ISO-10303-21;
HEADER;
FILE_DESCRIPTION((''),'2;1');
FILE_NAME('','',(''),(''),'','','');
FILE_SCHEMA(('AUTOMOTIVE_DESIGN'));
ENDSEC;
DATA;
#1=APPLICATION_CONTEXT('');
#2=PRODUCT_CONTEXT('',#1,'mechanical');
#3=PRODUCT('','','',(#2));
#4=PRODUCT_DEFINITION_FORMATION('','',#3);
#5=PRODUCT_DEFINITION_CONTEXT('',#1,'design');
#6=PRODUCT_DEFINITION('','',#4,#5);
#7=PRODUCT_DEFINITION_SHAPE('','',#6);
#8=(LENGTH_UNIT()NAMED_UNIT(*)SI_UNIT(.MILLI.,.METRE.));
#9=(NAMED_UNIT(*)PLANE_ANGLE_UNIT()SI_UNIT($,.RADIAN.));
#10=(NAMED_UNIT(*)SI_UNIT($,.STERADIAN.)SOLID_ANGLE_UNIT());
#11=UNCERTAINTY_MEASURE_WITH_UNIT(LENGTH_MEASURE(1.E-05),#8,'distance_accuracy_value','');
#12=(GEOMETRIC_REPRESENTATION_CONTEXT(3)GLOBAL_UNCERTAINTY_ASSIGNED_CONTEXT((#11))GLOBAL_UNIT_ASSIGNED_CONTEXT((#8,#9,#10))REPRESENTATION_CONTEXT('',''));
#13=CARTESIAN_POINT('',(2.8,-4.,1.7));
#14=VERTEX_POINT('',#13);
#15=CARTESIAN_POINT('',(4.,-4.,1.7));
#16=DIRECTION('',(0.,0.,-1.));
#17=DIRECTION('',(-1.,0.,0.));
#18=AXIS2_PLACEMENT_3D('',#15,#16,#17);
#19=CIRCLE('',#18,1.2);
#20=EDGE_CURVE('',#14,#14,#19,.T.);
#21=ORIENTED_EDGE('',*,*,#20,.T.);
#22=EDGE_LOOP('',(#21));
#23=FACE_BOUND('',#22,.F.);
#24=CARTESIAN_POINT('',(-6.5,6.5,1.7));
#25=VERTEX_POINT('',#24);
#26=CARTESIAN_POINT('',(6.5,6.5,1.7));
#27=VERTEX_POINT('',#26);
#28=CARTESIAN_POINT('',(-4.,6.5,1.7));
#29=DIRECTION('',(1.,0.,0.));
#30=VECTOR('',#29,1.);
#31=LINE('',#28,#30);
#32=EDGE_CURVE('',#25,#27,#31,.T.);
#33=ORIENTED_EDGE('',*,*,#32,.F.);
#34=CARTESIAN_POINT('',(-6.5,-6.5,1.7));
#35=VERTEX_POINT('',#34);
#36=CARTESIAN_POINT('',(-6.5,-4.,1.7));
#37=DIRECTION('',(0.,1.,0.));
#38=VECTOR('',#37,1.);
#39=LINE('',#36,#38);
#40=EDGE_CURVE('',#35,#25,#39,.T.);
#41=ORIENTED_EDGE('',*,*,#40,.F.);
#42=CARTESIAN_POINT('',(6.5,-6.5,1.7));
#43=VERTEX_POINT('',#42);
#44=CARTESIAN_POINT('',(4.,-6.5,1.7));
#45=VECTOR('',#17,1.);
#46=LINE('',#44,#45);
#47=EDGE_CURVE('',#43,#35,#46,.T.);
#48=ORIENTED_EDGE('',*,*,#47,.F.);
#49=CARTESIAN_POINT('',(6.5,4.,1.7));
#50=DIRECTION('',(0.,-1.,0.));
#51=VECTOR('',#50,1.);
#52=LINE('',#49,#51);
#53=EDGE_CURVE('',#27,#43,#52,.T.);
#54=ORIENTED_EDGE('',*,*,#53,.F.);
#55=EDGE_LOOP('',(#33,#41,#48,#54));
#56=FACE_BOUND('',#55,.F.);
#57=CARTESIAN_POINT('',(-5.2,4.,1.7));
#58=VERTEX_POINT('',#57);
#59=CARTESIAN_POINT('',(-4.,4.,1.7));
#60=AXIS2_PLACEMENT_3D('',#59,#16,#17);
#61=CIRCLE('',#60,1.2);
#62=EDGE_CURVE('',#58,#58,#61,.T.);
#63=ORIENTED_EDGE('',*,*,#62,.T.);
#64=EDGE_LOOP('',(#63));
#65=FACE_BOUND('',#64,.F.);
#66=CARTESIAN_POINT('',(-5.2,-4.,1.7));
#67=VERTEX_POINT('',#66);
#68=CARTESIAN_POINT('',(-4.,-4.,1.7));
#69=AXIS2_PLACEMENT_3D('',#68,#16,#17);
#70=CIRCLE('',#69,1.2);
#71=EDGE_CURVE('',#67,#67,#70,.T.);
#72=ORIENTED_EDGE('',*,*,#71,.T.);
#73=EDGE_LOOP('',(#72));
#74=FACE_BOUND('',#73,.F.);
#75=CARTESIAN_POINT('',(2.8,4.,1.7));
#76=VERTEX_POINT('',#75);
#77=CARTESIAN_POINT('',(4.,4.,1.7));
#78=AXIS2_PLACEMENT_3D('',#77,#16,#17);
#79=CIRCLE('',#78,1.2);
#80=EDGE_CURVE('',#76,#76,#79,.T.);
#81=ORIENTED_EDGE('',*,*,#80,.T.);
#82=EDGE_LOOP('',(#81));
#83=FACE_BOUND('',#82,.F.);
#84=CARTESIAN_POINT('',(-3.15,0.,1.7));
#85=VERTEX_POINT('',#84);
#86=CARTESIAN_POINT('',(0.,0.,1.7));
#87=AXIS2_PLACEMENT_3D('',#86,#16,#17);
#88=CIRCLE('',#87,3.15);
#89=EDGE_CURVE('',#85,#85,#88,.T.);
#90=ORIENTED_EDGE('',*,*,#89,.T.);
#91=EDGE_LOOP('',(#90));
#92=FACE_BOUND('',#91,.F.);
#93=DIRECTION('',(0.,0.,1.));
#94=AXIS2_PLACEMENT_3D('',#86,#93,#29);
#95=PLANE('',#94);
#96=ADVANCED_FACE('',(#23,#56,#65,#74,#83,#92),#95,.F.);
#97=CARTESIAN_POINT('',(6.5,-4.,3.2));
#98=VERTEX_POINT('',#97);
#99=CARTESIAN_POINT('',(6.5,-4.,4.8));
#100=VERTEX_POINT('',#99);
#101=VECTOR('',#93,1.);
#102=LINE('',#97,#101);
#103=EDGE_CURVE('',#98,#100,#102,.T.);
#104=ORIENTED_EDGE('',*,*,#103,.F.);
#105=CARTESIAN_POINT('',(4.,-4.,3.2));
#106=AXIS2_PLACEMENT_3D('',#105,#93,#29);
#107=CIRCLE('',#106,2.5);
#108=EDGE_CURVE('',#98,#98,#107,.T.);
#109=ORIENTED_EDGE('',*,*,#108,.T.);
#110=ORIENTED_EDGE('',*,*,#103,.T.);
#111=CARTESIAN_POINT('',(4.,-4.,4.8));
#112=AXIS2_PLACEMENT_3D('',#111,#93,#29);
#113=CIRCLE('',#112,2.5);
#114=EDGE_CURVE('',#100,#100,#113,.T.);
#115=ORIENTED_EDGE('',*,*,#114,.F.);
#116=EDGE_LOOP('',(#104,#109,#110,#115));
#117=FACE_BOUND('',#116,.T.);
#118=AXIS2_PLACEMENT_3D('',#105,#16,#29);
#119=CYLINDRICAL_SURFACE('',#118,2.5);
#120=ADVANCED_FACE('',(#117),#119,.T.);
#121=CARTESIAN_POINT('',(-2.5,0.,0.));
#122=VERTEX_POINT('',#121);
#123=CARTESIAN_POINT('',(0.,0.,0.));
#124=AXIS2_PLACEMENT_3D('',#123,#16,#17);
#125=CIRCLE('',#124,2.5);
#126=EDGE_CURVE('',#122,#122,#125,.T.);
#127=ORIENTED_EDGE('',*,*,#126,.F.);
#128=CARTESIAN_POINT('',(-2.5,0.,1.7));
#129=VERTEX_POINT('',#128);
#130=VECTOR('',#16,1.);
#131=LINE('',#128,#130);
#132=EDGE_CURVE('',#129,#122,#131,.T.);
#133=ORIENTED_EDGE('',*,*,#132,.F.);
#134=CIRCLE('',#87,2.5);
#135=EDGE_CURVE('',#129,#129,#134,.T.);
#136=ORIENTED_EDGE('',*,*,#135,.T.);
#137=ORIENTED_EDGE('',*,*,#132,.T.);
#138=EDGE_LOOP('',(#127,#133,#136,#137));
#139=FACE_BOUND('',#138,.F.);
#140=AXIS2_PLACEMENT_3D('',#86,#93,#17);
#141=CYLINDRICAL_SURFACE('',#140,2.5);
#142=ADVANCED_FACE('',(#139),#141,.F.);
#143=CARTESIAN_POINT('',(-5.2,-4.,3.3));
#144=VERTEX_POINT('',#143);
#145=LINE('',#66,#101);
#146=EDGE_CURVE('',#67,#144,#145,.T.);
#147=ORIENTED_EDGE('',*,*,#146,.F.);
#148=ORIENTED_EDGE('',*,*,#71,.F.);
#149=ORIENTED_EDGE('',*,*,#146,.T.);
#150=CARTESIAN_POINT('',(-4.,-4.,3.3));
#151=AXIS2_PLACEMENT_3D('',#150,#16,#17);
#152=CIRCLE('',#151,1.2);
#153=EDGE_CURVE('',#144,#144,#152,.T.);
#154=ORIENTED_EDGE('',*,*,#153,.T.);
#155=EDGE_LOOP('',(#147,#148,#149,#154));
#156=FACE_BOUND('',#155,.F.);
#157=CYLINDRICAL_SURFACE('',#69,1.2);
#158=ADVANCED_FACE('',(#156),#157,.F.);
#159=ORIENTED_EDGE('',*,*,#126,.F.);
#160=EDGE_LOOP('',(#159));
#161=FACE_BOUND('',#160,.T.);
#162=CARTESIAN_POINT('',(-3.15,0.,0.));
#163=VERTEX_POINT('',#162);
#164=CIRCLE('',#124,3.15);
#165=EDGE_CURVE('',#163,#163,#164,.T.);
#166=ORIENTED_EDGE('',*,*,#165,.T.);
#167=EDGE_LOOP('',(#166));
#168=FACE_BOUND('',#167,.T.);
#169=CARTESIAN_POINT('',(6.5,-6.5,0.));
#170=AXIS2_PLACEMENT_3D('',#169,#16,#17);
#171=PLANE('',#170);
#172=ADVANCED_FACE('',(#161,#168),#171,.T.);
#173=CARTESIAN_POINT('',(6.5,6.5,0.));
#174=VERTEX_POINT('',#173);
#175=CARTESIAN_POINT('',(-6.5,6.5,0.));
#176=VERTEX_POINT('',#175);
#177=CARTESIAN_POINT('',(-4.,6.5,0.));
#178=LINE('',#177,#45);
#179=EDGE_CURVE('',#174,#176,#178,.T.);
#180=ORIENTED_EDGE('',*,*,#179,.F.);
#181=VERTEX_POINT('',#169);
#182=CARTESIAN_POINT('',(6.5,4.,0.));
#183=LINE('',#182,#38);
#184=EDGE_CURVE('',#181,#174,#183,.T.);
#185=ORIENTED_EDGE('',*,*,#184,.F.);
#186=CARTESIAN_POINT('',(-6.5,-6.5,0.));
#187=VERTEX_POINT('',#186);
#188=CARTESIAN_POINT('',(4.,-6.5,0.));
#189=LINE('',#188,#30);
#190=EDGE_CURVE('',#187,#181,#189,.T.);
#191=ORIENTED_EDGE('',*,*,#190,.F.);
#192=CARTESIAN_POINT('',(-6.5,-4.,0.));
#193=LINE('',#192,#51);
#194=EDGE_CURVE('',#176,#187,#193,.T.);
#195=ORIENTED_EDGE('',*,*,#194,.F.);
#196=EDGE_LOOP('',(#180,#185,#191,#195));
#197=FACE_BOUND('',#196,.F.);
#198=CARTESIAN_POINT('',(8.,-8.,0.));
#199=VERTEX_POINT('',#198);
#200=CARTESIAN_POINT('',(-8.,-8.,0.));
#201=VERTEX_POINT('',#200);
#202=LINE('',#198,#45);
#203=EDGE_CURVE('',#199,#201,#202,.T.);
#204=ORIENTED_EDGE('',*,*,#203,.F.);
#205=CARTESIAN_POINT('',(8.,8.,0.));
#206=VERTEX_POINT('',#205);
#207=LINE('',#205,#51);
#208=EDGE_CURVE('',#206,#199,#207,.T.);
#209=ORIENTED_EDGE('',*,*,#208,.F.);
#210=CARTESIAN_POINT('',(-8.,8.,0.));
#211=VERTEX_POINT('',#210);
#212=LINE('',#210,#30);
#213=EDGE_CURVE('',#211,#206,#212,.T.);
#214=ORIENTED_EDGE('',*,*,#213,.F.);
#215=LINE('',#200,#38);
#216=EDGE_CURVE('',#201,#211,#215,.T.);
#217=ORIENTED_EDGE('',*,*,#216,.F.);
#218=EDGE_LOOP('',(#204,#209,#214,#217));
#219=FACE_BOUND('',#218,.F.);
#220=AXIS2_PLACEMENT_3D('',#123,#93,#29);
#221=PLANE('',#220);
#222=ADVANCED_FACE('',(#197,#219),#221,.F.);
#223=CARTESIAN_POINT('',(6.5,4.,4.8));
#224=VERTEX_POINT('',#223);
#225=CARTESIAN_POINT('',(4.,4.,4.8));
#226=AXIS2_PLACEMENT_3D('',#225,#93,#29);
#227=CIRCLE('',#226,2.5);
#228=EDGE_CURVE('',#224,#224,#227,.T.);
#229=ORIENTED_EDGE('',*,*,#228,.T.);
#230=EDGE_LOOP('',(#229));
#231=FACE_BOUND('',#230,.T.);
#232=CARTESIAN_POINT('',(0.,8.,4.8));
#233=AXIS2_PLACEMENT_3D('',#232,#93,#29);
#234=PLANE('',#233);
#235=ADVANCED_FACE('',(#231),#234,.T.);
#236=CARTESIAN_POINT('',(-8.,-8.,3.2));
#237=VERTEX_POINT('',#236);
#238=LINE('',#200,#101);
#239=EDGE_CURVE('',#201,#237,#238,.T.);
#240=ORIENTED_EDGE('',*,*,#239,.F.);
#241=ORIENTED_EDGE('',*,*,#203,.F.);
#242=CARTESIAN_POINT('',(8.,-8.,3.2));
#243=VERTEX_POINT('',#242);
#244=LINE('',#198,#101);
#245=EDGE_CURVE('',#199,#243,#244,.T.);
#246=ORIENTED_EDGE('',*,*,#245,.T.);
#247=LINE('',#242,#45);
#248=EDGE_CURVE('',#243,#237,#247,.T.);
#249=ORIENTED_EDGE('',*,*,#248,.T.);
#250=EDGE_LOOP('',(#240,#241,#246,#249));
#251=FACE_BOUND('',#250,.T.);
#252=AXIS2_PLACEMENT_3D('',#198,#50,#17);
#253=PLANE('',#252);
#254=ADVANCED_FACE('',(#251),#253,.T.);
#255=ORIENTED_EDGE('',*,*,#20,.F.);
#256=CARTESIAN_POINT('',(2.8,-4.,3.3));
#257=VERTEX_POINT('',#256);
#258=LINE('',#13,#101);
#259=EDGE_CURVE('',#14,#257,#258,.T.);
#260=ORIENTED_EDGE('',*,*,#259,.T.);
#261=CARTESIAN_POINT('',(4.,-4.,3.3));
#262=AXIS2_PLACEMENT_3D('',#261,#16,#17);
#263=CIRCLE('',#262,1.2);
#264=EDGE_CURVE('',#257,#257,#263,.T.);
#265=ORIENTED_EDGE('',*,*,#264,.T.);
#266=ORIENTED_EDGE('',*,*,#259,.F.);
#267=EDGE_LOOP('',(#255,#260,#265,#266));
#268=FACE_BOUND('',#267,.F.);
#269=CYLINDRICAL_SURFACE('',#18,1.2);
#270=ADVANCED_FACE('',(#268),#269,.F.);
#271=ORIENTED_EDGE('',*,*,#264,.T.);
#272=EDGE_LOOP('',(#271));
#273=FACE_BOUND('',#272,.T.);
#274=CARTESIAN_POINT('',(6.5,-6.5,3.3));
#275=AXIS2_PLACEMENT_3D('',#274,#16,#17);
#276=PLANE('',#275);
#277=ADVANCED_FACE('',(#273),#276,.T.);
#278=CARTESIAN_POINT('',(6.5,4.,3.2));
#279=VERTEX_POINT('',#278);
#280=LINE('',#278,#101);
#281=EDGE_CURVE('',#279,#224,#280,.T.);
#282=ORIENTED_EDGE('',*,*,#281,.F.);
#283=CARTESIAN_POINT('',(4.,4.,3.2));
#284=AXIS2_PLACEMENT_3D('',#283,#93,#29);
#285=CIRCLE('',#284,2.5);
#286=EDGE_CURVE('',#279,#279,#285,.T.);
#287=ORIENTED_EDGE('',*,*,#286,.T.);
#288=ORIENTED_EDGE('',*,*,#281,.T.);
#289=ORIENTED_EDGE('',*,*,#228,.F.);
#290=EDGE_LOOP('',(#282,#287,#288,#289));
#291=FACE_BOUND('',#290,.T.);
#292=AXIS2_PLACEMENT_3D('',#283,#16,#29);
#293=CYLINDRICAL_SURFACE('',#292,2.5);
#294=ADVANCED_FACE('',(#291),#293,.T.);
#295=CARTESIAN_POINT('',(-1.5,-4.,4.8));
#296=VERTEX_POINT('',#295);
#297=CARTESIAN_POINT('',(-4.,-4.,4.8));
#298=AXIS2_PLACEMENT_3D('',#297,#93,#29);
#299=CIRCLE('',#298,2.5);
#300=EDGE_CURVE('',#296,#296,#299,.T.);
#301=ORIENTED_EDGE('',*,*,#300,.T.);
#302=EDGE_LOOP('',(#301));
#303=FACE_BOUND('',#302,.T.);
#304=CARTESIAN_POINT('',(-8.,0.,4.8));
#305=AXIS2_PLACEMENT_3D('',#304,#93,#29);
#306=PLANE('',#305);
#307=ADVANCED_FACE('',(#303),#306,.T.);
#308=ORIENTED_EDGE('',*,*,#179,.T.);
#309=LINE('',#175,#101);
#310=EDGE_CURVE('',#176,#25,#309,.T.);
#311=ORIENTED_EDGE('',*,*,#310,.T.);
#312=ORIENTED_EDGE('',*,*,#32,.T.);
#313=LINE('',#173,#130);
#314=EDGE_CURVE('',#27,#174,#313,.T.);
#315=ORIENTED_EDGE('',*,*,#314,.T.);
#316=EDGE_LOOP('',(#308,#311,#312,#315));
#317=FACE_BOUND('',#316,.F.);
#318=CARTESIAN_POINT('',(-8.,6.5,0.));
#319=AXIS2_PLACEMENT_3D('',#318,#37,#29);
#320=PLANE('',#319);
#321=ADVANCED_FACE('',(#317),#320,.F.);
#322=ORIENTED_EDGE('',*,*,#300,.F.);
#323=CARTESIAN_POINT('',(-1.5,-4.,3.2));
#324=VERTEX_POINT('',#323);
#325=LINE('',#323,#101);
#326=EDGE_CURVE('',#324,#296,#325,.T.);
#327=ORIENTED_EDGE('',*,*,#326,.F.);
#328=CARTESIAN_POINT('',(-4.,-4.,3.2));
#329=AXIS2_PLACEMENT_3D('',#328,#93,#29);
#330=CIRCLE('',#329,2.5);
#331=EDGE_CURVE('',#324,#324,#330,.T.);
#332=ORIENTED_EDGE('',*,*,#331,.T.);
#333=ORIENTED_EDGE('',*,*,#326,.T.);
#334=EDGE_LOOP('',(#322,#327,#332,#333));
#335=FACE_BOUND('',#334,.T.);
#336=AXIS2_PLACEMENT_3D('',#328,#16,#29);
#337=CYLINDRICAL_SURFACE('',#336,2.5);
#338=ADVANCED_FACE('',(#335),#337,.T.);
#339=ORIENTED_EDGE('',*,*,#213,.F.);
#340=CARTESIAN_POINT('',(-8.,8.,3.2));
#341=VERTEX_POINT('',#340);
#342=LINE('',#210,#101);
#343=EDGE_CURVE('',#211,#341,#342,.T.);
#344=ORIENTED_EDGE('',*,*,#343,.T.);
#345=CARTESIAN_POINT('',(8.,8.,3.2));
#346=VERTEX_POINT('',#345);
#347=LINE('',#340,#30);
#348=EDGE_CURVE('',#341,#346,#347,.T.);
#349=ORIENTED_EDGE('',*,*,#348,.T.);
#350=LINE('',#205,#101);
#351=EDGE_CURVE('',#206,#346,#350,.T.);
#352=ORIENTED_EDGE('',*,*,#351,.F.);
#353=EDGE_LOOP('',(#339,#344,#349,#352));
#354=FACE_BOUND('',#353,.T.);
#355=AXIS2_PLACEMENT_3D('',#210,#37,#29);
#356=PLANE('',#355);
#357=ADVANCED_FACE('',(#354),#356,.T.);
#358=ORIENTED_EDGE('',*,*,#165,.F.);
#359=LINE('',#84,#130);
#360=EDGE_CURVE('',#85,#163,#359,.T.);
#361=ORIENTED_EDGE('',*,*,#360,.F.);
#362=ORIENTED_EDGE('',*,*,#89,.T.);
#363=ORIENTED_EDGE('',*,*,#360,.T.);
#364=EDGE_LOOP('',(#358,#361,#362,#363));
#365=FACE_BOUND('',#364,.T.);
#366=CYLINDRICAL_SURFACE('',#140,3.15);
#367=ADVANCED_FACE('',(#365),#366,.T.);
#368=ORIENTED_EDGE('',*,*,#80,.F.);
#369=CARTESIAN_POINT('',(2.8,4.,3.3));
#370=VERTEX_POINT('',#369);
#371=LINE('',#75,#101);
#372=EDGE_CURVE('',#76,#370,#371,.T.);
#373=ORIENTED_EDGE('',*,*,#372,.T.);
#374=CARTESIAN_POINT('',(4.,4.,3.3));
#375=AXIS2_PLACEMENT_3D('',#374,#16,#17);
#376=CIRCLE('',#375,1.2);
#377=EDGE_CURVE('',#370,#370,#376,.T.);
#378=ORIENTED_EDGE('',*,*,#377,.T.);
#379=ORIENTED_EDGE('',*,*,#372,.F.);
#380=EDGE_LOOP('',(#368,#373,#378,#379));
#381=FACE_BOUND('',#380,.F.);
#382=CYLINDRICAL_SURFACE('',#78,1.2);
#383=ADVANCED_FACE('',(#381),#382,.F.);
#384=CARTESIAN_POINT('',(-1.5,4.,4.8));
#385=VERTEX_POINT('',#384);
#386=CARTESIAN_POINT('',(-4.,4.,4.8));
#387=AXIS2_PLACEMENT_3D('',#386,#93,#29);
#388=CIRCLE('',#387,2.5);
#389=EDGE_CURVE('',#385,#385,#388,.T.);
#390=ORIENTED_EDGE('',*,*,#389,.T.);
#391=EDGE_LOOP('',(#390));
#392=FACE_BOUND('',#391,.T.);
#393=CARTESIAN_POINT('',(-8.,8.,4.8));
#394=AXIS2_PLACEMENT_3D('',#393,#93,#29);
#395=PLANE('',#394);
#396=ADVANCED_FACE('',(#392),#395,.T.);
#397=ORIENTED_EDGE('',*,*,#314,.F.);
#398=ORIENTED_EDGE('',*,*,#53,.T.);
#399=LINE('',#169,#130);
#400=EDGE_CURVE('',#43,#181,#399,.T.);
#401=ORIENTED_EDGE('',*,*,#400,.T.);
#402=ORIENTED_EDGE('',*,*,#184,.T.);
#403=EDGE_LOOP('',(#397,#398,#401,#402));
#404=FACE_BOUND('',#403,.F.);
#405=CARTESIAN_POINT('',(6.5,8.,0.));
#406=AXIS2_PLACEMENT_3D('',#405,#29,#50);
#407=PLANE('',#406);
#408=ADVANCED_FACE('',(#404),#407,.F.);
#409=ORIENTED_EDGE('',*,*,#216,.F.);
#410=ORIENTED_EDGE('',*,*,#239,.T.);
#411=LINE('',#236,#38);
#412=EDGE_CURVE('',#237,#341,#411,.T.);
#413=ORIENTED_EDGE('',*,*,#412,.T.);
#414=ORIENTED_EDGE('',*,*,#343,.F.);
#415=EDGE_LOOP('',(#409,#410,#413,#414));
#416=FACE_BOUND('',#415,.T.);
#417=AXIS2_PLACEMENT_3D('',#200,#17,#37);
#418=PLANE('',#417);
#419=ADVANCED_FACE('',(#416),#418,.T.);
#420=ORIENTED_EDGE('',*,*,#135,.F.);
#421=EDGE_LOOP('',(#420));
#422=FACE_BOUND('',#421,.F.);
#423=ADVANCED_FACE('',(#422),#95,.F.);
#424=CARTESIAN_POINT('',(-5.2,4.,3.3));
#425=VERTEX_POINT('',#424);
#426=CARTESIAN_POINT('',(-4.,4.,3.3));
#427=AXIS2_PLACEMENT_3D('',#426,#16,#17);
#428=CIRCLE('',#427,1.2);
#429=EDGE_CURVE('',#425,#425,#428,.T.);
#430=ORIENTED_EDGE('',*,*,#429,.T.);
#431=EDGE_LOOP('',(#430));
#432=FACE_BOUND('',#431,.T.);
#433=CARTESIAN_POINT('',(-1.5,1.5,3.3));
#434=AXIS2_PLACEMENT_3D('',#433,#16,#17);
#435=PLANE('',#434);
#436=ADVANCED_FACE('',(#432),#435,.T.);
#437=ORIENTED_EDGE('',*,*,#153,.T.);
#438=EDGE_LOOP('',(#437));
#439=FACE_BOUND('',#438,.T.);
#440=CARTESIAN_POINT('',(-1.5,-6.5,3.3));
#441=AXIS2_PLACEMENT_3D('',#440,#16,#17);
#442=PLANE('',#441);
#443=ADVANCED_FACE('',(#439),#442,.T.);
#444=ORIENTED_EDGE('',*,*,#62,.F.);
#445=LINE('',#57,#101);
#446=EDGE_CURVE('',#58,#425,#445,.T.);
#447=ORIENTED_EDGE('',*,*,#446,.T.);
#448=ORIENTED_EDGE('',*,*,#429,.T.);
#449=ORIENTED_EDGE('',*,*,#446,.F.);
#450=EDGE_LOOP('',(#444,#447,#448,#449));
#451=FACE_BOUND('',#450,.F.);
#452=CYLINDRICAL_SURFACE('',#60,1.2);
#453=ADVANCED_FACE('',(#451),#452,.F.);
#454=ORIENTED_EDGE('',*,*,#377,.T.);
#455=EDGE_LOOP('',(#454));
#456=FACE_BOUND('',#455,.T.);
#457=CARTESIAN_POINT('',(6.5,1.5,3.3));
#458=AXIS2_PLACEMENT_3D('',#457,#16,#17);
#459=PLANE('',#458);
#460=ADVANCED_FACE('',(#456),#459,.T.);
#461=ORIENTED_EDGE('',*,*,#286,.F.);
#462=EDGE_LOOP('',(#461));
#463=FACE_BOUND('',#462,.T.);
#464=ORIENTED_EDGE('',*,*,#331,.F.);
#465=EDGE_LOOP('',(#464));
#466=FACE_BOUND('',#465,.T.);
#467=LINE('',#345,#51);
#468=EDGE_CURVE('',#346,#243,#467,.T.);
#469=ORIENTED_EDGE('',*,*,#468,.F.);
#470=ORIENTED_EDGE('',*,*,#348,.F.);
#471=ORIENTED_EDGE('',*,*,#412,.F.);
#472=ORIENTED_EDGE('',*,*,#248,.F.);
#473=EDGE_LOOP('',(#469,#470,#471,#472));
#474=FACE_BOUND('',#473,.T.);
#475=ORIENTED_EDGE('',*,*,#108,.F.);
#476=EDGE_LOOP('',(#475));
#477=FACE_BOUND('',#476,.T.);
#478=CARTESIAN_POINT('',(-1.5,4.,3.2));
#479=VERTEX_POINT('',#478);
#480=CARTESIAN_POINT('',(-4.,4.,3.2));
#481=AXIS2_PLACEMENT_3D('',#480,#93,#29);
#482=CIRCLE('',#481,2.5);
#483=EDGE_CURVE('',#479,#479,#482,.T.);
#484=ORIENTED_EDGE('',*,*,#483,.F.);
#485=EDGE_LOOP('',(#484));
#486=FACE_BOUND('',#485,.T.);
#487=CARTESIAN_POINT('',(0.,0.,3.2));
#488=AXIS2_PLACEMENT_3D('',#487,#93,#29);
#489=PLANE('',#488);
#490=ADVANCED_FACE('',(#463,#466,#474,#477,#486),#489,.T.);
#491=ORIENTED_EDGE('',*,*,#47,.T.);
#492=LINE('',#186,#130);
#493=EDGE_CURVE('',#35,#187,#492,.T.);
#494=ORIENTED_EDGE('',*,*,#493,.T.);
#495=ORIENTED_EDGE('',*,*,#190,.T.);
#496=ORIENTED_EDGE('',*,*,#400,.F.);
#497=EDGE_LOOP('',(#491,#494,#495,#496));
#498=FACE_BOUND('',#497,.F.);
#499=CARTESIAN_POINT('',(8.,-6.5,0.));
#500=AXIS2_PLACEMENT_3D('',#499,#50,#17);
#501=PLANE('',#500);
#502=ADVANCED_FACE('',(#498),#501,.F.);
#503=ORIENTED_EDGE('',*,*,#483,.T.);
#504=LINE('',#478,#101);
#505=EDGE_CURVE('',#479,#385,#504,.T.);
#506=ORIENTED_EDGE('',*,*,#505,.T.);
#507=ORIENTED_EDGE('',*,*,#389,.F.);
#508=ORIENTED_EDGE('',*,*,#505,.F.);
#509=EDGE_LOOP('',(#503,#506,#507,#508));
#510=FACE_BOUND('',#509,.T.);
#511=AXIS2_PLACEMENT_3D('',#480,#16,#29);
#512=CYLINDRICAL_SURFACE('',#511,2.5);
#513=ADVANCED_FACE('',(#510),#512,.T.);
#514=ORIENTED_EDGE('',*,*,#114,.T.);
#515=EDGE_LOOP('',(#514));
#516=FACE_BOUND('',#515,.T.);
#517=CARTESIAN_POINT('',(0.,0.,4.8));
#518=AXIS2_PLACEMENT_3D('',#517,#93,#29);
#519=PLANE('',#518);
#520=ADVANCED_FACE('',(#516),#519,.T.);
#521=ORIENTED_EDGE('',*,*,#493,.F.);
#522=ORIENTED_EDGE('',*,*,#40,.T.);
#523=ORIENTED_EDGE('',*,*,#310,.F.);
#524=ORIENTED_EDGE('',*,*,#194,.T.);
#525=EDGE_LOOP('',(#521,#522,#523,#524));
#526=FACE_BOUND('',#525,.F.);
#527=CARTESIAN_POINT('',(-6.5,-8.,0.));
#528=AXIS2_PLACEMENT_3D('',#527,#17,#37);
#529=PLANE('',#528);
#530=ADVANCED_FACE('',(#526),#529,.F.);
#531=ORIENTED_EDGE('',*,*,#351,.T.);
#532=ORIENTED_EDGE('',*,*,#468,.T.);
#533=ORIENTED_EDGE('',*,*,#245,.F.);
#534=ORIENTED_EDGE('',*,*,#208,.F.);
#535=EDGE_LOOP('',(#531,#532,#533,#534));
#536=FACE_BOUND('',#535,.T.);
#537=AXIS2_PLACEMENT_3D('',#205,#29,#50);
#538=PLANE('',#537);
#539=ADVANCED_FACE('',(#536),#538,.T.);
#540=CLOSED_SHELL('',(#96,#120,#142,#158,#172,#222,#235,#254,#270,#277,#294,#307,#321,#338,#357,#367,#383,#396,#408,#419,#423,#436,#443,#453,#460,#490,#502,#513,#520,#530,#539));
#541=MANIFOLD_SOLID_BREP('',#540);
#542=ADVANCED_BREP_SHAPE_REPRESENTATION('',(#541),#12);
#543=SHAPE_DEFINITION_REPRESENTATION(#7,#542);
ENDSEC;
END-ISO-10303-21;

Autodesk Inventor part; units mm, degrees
ref_plane "YZ Plane" through (0, 0, 0) normal (1, 0, 0) x (0, 1, 0)
ref_plane "XZ Plane" through (0, 0, 0) normal (0, 1, 0) x (-1, 0, 0)
ref_plane "XY Plane" through (0, 0, 0) normal (0, 0, 1) x (1, 0, 0)
sketch "Sketch1" plane through (0, 0, 0) normal (0, 0, 1) x (1, 0, 0)
  line L0 (-8, 8) -> (8, 8)
  line L1 (8, 8) -> (8, -8)
  line L2 (8, -8) -> (-8, -8)
  line L3 (-8, -8) -> (-8, 8)
  point P0 (0, 0)
  dimension "d0" = 16
  dimension "d1" = 16
  dimension "d2" = 8
  dimension "d3" = 8
extrude "Extrusion1" add sketch "Sketch1" along normal blind 3.2
shell "Shell1" thickness 1.5 removed faces 1 at (-2.6667, -2.6667, 0)
sketch "Sketch2" plane through (0, 0, 3.2) normal (0, 0, 1) x (1, 0, 0)
  circle A0 centre (4, -4) radius 2.5
  line L0 (8, 8) -> (8, -8) projected
  line L1 (8, -8) -> (-8, -8) projected
  dimension "d7" = 5
  dimension "d10" = 4
  dimension "d11" = 4
extrude "Extrusion2" add sketch "Sketch2" along normal blind 1.6
sketch "Sketch3" plane through (6.5, -6.5, 1.7) normal (0, 0, -1) x (-1, 0, 0)
  circle A0 centre (2.5, 2.5) radius 2.5 projected
  circle A1 centre (2.5, 2.5) radius 1.2
  point P0 (6.5, 6.5)
  dimension "d18" = 2.4
extrude "Extrusion3" cut sketch "Sketch3" against normal blind 1.6 contours A1
pattern_linear "Rectangular Pattern1" count 2 spacing 8 along (0, 1, 0) count 2 spacing 8 along (-1, 0, 0) of "Extrusion2", "Extrusion3"
sketch "Sketch4" plane through (6.5, -6.5, 1.7) normal (0, 0, -1) x (-1, 0, 0)
  circle A0 centre (2.5, 10.5) radius 1.2 projected
  circle A1 centre (2.5, 2.5) radius 1.2 projected
  line L0 (0, 13) -> (0, 0) projected
  line L1 (0, 0) -> (13, 0) projected
  circle A2 centre (6.5, 6.5) radius 3.15
  circle A3 centre (6.5, 6.5) radius 2.5
  point P0 (6.5, 6.5)
  dimension "d21" = 6.5
  dimension "d22" = 6.5
  dimension "d23" = 10.5
  dimension "d24" = 2.5
  dimension "d25" = 5
  dimension "d26" = 6.3
extrude "Extrusion4" add sketch "Sketch4" along normal up to surface (1.7 mm away) contours A2
pattern_of_one "Rectangular Pattern2"
equation "\"d0\" = 8 * WIDTH"
equation "\"d1\" = 8 * LENGTH"
equation "\"d2\" = 0.5 * d0"
equation "\"d3\" = 0.5 * d1"
equation "\"d4\" = HEIGHT"
equation "\"d21\" = 0.5 * d23 + 0.5 * d24"
equation "\"d22\" = d21"
equation "\"WIDTH\" = 2"
equation "\"HEIGHT\" = 3.2"
equation "\"LENGTH\" = 2"
properties part number "3022" material "Steel"
